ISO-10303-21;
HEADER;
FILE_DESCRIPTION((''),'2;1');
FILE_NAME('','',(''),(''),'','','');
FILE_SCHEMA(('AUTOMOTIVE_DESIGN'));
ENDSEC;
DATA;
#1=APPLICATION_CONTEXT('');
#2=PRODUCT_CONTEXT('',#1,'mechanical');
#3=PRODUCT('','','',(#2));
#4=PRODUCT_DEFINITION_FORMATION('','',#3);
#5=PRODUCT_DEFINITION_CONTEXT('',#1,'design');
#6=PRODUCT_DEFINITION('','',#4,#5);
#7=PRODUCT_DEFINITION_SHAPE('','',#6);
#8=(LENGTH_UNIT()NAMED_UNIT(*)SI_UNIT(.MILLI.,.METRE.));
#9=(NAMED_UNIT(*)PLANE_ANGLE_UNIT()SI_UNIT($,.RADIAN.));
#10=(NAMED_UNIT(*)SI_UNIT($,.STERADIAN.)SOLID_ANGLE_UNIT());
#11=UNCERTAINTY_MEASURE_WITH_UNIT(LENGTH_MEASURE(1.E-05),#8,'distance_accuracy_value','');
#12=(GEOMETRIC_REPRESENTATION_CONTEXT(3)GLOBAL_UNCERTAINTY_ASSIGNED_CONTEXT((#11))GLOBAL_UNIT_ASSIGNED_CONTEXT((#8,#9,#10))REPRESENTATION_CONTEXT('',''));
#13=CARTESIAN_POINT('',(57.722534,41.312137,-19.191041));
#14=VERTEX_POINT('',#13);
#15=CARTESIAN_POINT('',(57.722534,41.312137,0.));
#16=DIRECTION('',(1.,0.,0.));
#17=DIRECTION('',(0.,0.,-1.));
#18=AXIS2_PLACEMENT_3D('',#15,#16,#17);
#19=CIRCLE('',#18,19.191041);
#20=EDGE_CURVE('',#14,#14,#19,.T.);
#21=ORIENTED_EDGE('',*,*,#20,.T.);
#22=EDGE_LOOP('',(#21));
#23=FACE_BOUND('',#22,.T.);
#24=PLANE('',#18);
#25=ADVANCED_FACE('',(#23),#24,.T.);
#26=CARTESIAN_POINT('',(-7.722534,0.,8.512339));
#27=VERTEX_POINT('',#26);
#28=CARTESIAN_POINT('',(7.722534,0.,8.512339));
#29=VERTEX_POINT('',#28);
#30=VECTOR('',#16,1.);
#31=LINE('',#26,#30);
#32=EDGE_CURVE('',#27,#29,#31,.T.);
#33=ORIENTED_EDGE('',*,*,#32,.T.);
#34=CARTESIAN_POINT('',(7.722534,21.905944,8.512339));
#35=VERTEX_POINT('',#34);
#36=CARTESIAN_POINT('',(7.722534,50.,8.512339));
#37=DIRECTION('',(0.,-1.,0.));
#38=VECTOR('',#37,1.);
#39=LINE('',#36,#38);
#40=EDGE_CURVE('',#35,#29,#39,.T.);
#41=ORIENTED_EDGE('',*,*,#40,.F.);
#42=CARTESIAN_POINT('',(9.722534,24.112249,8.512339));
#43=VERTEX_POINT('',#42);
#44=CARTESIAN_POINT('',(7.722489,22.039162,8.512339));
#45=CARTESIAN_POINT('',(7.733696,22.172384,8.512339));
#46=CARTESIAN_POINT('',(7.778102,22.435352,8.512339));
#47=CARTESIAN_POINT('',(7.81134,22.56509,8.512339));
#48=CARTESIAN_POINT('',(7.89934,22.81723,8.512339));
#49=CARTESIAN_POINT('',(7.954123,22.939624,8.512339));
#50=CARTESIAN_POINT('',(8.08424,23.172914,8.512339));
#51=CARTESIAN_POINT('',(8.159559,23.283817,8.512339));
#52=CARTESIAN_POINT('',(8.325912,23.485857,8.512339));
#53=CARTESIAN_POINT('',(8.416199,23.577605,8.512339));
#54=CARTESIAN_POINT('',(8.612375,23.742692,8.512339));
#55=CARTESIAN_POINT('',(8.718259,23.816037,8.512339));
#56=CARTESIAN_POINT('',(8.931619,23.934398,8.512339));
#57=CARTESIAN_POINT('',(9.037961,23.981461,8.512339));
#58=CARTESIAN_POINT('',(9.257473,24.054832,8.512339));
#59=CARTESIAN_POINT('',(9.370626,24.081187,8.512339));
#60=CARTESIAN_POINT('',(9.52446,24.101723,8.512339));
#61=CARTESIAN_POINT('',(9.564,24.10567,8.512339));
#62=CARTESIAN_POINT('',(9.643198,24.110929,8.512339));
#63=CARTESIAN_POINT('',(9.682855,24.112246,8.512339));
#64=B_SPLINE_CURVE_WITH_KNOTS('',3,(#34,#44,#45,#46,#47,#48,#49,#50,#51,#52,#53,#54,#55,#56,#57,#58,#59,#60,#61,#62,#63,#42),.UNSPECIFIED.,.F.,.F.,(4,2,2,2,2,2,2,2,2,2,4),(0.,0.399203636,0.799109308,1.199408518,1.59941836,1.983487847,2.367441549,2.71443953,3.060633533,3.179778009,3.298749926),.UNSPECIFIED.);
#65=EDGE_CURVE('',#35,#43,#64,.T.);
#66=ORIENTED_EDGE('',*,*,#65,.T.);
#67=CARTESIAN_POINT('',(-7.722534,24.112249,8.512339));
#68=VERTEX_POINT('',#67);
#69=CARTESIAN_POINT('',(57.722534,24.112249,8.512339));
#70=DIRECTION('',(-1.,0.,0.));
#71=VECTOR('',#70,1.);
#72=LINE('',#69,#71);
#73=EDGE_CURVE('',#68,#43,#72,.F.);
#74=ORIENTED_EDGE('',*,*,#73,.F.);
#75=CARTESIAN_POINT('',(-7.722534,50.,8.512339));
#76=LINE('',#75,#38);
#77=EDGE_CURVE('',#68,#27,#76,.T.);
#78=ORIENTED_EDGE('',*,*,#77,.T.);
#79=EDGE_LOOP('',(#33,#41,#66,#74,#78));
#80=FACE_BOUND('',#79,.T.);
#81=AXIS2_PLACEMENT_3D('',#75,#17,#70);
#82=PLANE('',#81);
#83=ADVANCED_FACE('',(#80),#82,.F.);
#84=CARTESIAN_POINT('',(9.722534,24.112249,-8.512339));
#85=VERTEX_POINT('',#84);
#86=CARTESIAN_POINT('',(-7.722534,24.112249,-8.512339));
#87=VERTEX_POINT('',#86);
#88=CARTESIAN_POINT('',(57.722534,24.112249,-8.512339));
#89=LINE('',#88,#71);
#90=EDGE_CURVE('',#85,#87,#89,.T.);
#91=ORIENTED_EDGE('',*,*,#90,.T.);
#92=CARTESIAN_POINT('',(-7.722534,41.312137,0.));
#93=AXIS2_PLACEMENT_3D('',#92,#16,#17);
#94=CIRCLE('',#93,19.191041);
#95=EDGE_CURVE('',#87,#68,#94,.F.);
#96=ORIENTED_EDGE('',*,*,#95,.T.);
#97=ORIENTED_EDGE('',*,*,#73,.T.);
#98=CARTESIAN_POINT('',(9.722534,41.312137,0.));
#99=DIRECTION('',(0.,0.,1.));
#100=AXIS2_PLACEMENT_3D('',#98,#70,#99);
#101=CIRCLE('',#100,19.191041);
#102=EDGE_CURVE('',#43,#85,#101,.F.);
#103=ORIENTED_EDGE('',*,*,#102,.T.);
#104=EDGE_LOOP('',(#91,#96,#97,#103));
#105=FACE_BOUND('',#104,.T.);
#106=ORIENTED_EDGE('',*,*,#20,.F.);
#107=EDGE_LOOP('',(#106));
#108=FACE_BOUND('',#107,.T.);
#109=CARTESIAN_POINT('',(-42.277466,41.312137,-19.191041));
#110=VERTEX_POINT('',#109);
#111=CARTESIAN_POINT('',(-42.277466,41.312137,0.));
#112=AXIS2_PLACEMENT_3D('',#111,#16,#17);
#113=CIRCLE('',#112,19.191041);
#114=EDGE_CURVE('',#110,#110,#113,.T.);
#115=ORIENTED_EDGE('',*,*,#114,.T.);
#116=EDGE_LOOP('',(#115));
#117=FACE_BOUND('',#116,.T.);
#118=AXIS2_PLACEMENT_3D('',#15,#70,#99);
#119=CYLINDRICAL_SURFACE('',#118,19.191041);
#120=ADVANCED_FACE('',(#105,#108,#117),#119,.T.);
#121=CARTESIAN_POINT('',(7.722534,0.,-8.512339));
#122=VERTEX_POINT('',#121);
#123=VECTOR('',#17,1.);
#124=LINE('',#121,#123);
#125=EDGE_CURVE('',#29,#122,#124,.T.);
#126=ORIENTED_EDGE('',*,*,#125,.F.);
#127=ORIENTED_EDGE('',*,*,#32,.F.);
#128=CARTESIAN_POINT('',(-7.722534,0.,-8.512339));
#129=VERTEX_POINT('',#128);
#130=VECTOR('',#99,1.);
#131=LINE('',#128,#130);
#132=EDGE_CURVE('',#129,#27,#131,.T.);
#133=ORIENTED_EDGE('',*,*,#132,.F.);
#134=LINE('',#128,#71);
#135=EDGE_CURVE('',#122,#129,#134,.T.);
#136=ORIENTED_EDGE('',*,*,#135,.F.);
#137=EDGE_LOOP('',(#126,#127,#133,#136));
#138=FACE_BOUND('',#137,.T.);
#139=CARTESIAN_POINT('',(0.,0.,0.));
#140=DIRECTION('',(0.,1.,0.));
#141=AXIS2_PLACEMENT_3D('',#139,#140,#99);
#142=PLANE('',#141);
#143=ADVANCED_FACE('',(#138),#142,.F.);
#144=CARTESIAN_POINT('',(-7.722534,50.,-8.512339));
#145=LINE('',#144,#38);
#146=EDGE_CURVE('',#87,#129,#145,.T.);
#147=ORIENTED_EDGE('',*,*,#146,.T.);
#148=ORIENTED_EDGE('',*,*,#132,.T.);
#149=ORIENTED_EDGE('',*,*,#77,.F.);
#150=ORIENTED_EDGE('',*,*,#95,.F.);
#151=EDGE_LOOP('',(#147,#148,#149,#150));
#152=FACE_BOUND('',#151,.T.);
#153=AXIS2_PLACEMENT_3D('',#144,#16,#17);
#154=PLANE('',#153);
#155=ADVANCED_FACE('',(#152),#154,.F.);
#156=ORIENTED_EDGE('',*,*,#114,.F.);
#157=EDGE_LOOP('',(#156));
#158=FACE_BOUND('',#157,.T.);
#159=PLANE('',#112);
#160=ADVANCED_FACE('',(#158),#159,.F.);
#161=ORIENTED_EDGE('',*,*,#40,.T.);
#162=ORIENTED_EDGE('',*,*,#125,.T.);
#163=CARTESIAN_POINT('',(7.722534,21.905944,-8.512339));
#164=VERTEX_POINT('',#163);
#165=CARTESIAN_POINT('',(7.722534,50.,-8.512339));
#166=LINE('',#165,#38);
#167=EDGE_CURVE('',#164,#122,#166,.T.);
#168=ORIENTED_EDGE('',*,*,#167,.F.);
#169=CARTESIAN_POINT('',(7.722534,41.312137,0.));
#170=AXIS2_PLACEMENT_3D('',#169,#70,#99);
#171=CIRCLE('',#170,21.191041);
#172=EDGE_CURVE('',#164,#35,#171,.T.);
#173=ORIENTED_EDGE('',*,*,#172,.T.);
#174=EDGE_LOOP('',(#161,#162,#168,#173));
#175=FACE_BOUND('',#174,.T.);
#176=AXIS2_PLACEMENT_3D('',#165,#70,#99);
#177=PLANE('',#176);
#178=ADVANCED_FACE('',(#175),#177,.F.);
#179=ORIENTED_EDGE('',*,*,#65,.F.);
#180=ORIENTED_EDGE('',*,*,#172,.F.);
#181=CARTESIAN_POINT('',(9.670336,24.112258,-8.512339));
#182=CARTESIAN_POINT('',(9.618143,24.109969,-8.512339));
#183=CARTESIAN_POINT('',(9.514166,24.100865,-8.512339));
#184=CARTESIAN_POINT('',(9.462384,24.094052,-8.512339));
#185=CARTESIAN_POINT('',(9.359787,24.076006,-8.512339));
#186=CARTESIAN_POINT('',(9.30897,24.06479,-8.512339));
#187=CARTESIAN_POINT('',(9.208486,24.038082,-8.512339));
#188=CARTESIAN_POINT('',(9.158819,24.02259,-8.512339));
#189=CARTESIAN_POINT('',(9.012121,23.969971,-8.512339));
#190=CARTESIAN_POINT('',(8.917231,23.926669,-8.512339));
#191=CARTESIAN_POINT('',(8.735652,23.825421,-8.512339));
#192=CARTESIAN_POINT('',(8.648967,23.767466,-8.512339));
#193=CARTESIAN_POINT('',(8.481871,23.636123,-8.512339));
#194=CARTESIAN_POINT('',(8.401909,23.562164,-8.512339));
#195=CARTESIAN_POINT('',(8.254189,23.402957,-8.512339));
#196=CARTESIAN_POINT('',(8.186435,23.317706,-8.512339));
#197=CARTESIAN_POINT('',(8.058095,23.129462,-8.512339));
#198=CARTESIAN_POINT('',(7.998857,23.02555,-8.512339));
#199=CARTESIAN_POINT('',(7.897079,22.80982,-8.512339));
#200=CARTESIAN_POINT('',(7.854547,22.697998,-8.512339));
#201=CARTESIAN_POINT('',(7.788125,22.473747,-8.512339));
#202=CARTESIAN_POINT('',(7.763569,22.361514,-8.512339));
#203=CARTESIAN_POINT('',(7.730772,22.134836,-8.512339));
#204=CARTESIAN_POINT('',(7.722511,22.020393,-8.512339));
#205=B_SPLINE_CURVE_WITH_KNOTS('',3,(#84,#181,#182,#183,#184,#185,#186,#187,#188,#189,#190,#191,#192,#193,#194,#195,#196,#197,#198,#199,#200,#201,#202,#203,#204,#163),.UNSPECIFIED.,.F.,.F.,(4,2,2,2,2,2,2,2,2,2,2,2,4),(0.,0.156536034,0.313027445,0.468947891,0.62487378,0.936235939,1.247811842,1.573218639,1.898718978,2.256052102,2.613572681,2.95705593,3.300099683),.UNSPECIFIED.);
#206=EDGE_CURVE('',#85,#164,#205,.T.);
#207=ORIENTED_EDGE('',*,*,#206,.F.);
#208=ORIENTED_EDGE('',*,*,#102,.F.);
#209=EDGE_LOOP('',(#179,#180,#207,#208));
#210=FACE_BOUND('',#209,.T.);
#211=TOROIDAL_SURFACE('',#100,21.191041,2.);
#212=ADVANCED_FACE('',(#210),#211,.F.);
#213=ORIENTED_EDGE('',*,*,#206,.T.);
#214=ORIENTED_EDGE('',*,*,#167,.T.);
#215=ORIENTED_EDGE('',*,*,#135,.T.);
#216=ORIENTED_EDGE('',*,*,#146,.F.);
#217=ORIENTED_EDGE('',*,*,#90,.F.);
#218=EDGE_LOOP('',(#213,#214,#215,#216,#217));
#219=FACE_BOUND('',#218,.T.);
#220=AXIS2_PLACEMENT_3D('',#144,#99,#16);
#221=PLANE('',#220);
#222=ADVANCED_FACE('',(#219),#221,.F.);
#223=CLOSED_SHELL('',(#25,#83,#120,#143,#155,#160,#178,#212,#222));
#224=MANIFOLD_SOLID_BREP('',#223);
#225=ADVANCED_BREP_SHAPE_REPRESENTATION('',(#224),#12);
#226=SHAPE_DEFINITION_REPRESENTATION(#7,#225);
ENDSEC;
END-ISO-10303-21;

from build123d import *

# Parameters (mm, degrees)
SKETCH_1_W           = 15.445067976
SKETCH_1_H           = 17.0246772
EXTRUDE_1_DEPTH      = 50
EXTRUDE_2_DEPTH      = 50
EXTRUDE_2_DEPTH_BACK = 50
SKETCH_2_R           = 19.191040977
FILLET_3_R           = 2


with BuildPart() as part:
    # 草图1 → 凸台-拉伸1 (new body)
    with BuildSketch(Plane(origin=(0, 0, 0), x_dir=(1, 0, 0), z_dir=(0, 1, 0))):
        Rectangle(SKETCH_1_W, SKETCH_1_H)
    extrude(amount=EXTRUDE_1_DEPTH)

    # 草图2 → 凸台-拉伸2 (add, two sides: drawn at the far end of the back side and taken through both)
    with BuildSketch(Plane(origin=(7.722533988, 0, 0), x_dir=(0, 0, -1), z_dir=(1, 0, 0)).offset(-EXTRUDE_2_DEPTH_BACK)):
        with Locations((0, 41.312136517)):
            Circle(SKETCH_2_R)
    extrude(amount=EXTRUDE_2_DEPTH + EXTRUDE_2_DEPTH_BACK)

    # 圆角3
    # the kernel refuses this fillet: 2 mm, written as the material it adds along each edge
    with BuildSketch(Plane(origin=(7.722533988, 41.312136517, 0), x_dir=(0, -0.7517142761643256, 0.6594889286491047), z_dir=(0, 0.6594889286491047, 0.7517142761643256))) as fillet_3_piece_1_section:
        with BuildLine():
            CenterArc((19.191040977 + FILLET_3_R, FILLET_3_R), FILLET_3_R, 180, 90)
            Line((19.191040977, FILLET_3_R), (19.191040977, 0))
            Line((19.191040977, 0), (19.191040977 + FILLET_3_R, 0))
        make_face()
    fillet_3_piece_1 = revolve(axis=Axis((7.722533988, 41.312136517, 0), (1, 0, 0)), revolution_arc=82.521814453, mode=Mode.PRIVATE)
    fillet_3_piece_1 = split(fillet_3_piece_1, bisect_by=Plane(origin=(8.28980216, 21.553827368, -8.5123386), z_dir=(0, 0, 1)), keep=Keep.TOP, mode=Mode.PRIVATE)
    fillet_3_piece_1 = split(fillet_3_piece_1, bisect_by=Plane(origin=(8.28980216, 21.553827368, 8.5123386), z_dir=(0, 0, -1)), keep=Keep.TOP, mode=Mode.PRIVATE)
    add(fillet_3_piece_1)


solid = part.part
